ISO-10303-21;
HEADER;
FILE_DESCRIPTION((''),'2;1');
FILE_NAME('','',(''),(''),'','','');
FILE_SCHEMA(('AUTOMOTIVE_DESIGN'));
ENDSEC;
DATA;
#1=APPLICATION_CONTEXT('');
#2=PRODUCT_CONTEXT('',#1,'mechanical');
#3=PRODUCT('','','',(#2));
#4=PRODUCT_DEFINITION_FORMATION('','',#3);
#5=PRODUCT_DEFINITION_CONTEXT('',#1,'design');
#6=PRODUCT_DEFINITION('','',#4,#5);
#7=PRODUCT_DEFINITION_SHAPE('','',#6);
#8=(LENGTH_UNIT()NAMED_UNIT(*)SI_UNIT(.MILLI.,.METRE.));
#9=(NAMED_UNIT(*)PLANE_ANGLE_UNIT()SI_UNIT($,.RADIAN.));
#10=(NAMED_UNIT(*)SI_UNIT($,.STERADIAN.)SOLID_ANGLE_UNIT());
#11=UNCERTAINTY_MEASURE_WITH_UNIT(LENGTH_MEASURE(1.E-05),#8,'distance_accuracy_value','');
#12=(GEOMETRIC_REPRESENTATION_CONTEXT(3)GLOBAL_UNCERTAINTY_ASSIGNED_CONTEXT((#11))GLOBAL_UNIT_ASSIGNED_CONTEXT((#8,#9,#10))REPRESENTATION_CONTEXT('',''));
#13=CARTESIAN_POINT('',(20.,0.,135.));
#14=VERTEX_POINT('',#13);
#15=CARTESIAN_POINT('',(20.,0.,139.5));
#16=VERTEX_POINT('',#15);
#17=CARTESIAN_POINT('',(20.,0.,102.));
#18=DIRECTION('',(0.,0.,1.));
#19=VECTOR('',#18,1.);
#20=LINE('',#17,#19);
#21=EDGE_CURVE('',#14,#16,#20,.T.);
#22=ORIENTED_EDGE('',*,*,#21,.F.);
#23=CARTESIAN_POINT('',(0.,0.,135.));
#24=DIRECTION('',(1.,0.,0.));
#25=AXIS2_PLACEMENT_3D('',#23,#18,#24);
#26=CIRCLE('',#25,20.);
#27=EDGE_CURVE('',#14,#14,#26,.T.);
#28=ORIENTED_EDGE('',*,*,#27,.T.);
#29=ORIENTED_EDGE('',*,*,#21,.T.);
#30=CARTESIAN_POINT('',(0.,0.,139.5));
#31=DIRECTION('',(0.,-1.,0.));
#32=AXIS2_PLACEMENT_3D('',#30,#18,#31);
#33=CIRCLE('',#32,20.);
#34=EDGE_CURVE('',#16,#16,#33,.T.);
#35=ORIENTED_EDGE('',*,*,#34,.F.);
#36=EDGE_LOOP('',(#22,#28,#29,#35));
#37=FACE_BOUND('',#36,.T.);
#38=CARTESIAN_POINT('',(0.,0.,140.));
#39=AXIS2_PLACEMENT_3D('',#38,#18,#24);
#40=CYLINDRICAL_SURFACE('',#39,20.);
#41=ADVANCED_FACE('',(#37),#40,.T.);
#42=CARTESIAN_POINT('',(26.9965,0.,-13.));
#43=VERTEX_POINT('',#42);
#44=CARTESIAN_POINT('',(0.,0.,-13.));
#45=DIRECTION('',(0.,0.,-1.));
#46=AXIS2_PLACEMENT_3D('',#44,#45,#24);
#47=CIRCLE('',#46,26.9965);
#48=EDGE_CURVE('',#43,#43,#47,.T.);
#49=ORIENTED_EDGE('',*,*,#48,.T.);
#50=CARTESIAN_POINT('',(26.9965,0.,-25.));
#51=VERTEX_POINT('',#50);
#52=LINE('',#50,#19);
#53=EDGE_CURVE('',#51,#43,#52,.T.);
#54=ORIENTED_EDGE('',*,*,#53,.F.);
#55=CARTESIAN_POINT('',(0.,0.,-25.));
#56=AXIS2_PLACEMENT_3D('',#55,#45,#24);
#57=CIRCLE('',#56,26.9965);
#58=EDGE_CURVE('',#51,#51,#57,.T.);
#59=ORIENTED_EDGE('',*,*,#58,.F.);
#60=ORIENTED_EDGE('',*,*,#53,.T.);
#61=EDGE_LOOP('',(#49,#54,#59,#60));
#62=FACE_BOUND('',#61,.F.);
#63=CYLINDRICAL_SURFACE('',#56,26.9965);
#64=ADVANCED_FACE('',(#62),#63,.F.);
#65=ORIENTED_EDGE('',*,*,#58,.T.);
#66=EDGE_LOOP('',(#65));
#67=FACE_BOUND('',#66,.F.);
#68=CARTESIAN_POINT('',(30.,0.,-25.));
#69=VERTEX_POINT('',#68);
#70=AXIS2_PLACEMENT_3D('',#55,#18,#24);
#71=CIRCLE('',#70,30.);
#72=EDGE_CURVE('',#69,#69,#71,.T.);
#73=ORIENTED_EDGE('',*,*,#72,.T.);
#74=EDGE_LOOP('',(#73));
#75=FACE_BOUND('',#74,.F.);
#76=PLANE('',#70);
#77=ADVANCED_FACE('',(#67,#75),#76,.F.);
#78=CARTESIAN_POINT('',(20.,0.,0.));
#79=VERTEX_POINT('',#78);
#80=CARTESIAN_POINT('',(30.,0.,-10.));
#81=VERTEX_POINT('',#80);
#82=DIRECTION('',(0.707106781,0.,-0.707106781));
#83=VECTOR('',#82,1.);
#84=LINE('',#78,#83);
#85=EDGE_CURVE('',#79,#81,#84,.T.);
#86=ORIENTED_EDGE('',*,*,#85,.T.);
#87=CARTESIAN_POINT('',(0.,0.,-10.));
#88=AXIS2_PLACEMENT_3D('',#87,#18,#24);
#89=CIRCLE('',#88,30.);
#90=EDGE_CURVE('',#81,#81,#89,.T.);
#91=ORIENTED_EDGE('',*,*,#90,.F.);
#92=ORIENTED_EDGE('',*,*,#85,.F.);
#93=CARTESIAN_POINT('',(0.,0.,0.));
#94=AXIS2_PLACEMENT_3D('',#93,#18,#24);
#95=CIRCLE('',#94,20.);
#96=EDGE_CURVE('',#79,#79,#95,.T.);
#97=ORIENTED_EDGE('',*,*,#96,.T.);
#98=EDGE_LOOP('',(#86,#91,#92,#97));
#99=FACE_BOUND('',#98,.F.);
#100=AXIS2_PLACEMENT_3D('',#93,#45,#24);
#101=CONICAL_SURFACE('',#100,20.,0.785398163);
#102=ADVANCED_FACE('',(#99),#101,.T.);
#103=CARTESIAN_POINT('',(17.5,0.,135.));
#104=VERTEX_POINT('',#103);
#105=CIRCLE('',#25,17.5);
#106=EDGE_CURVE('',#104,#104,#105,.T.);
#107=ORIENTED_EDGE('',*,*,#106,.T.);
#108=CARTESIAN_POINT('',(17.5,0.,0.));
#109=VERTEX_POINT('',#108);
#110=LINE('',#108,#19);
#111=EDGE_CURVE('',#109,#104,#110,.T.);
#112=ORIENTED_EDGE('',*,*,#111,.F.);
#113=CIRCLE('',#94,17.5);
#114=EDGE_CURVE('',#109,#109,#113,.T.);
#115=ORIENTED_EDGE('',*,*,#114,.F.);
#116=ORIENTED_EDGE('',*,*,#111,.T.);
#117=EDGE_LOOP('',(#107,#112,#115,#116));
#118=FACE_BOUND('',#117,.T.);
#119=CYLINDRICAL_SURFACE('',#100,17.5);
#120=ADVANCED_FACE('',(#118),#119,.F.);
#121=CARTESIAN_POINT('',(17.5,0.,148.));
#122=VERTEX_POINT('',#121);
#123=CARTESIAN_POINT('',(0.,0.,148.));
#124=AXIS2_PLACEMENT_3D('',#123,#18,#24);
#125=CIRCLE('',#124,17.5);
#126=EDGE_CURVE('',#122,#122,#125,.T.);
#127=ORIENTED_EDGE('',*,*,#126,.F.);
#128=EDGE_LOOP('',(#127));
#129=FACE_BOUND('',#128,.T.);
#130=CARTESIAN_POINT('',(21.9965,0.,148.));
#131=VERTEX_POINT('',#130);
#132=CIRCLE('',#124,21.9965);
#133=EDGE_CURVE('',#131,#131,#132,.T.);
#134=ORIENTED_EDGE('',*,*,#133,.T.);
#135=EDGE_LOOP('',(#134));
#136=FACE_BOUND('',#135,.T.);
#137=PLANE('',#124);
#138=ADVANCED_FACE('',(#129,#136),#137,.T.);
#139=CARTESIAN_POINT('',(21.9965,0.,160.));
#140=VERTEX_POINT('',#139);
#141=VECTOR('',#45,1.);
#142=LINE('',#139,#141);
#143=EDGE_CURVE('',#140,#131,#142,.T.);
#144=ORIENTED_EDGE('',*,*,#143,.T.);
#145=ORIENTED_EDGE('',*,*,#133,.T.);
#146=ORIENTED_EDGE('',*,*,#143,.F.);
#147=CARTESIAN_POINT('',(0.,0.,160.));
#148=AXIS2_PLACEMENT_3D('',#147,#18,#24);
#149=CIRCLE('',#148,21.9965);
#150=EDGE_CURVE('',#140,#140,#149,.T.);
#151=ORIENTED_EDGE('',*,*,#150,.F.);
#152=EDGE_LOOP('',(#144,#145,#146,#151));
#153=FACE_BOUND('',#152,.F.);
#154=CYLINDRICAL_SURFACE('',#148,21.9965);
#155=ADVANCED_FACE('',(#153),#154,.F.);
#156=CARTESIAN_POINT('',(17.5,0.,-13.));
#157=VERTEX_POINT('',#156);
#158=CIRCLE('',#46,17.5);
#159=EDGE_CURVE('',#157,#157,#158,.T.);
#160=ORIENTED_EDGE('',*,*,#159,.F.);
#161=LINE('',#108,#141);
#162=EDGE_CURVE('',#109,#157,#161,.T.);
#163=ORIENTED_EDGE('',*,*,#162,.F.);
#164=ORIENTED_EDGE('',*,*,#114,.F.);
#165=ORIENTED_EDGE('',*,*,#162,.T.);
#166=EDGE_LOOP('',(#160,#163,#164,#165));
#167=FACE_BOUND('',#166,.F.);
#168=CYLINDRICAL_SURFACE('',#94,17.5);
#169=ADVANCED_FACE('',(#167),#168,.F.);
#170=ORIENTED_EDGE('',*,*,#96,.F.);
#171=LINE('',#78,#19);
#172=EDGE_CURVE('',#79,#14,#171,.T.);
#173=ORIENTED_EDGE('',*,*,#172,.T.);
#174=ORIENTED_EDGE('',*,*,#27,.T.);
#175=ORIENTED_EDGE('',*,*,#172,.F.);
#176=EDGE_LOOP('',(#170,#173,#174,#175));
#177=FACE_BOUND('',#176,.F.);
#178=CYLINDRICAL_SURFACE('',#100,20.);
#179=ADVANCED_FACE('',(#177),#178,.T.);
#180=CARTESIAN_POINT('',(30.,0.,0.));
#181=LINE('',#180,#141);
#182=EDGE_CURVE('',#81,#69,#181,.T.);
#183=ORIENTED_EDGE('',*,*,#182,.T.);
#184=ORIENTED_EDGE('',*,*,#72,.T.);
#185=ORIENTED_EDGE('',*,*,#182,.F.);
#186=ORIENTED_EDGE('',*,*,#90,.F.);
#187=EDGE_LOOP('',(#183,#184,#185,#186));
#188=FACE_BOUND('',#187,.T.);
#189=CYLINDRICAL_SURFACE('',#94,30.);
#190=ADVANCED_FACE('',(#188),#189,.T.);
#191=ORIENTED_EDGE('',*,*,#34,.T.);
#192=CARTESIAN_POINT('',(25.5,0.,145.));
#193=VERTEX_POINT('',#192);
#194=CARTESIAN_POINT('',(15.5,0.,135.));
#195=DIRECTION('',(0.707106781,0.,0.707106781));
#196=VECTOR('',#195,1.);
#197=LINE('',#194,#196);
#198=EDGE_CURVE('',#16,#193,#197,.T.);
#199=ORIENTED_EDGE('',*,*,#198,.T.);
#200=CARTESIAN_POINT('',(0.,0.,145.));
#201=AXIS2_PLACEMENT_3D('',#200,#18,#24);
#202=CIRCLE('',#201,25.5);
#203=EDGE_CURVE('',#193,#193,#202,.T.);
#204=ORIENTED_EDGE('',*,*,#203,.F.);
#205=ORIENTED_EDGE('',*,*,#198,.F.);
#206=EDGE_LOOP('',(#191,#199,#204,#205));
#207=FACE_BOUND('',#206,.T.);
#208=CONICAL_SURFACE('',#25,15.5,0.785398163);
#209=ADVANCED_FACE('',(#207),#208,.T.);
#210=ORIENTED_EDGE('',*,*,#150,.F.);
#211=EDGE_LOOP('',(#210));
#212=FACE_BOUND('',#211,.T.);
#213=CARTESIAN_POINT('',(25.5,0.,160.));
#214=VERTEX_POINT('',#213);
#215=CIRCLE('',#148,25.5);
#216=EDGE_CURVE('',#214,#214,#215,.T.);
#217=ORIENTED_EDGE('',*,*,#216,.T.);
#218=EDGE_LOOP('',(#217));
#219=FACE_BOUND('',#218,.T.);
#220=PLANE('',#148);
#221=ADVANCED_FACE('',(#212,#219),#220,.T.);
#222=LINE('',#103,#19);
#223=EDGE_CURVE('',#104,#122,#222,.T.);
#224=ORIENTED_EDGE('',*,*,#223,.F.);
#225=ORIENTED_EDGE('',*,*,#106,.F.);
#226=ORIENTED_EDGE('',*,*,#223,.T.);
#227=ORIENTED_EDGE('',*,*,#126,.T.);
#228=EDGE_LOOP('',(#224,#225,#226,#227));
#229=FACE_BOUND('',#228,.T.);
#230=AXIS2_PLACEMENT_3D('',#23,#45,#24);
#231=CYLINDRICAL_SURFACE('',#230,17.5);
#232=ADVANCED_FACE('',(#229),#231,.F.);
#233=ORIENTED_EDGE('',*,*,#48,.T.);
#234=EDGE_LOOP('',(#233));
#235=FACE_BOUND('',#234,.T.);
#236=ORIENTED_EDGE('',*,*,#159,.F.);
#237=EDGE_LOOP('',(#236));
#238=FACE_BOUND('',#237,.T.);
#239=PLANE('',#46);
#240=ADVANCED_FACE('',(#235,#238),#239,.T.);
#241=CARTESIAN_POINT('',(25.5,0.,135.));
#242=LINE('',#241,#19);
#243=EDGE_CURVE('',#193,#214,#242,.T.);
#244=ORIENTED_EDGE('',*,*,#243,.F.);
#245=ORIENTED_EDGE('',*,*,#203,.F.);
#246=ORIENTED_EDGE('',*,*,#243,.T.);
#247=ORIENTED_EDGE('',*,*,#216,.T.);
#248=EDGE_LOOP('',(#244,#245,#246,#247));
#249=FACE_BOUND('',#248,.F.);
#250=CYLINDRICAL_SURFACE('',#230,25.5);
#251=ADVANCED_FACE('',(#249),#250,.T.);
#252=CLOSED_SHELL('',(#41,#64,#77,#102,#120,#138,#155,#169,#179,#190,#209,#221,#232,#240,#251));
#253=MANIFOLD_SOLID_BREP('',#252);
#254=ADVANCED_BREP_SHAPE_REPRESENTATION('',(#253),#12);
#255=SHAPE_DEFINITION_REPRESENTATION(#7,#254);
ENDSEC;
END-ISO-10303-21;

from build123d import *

# Parameters (mm, degrees)
F0_R          = 20
F0_R_2        = 17.5
F1_DEPTH      = 135
F2_R          = 30
F2_R_2        = 26.9985
F2_R_3        = 17.5
F3_DEPTH      = 25
F4_R          = 26.9965
F4_R_2        = 24
F4_R_3        = 17.5
F5_DEPTH      = 12
F6_R          = 25.5
F6_R_2        = 22.4965
F6_R_3        = 20
F6_R_4        = 17.5
F7_DEPTH      = 25
F8_R          = 21.9965
F8_R_2        = 17.5
F9_DEPTH      = 12
F10_S5_R      = 20
F10_T6_DEPTH  = 38
F10_S11_R     = 20
F10_T12_DEPTH = 44


# Not quite as in the source:
# - a fillet or chamfer that OpenCascade refuses, or shapes differently, is made with other operations: its cross-section is extruded or revolved along the edge and cut away or added


with BuildPart() as f1:
    # F0 (on Top) → F1 (new body)
    with BuildSketch(Plane.XY):
        Circle(F0_R)
        Circle(F0_R_2, mode=Mode.SUBTRACT)
    extrude(amount=F1_DEPTH)

    # F2 (on Top) → F3 (join)
    with BuildSketch(Plane.XY):
        Circle(F2_R)
        Circle(F2_R_2, mode=Mode.SUBTRACT)
        Circle(F2_R_2)
        Circle(F2_R_3, mode=Mode.SUBTRACT)
    extrude(amount=-F3_DEPTH)

    # F4 (on face) → F5 (cut)
    with BuildSketch(Plane(origin=(0, 0, -25), x_dir=(1, 0, 0), z_dir=(0, 0, -1))):
        Circle(F4_R)
        Circle(F4_R_2, mode=Mode.SUBTRACT)
        Circle(F4_R_2)
        Circle(F4_R_3, mode=Mode.SUBTRACT)
    extrude(amount=-F5_DEPTH, mode=Mode.SUBTRACT)

    # F6 (on face) → F7 (join)
    with BuildSketch(Plane.XY.offset(135)):
        Circle(F6_R)
        Circle(F6_R_2, mode=Mode.SUBTRACT)
        Circle(F6_R_2)
        Circle(F6_R_3, mode=Mode.SUBTRACT)
        Circle(F6_R_3)
        Circle(F6_R_4, mode=Mode.SUBTRACT)
    extrude(amount=F7_DEPTH)

    # F8 (on face) → F9 (cut)
    with BuildSketch(Plane.XY.offset(160)):
        Circle(F8_R)
        Circle(F8_R_2, mode=Mode.SUBTRACT)
    extrude(amount=-F9_DEPTH, mode=Mode.SUBTRACT)

    # F10: chamfer of 10 on 2 edges, made by hand


with BuildPart() as f10_tool2:
    # F10_s3 → F10_t4 (revolve)
    with BuildSketch(Plane.XZ):
        Polygon((15.5, 135), (25.5, 145), (25.5, 135), align=None)
    revolve(axis=Axis((0, 0, 135), (0, 0, 1)))

    # F10_s5 → F10_t6 (cut, symmetric)
    with BuildSketch(Plane.XY.offset(140)):
        Circle(F10_S5_R)
    extrude(amount=F10_T6_DEPTH, both=True, mode=Mode.SUBTRACT)


with BuildPart() as f1_1:
    add(f1.part)

    # F10_t1: cut F10_tool2
    add(f10_tool2.part, mode=Mode.SUBTRACT)


with BuildPart() as f10_tool8:
    # F10_s9 → F10_t10 (revolve)
    with BuildSketch(Plane.XZ):
        Polygon((20, 0), (30, -10), (30, 0), align=None)
    revolve(axis=Axis((0, 0, 0), (0, 0, 1)))

    # F10_s11 → F10_t12 (cut, symmetric)
    with BuildSketch(Plane.XY.offset(-5)):
        Circle(F10_S11_R)
    extrude(amount=F10_T12_DEPTH, both=True, mode=Mode.SUBTRACT)


with BuildPart() as f1_2:
    add(f1_1.part)

    # F10_t7: cut F10_tool8
    add(f10_tool8.part, mode=Mode.SUBTRACT)


solid = f1_2.part
